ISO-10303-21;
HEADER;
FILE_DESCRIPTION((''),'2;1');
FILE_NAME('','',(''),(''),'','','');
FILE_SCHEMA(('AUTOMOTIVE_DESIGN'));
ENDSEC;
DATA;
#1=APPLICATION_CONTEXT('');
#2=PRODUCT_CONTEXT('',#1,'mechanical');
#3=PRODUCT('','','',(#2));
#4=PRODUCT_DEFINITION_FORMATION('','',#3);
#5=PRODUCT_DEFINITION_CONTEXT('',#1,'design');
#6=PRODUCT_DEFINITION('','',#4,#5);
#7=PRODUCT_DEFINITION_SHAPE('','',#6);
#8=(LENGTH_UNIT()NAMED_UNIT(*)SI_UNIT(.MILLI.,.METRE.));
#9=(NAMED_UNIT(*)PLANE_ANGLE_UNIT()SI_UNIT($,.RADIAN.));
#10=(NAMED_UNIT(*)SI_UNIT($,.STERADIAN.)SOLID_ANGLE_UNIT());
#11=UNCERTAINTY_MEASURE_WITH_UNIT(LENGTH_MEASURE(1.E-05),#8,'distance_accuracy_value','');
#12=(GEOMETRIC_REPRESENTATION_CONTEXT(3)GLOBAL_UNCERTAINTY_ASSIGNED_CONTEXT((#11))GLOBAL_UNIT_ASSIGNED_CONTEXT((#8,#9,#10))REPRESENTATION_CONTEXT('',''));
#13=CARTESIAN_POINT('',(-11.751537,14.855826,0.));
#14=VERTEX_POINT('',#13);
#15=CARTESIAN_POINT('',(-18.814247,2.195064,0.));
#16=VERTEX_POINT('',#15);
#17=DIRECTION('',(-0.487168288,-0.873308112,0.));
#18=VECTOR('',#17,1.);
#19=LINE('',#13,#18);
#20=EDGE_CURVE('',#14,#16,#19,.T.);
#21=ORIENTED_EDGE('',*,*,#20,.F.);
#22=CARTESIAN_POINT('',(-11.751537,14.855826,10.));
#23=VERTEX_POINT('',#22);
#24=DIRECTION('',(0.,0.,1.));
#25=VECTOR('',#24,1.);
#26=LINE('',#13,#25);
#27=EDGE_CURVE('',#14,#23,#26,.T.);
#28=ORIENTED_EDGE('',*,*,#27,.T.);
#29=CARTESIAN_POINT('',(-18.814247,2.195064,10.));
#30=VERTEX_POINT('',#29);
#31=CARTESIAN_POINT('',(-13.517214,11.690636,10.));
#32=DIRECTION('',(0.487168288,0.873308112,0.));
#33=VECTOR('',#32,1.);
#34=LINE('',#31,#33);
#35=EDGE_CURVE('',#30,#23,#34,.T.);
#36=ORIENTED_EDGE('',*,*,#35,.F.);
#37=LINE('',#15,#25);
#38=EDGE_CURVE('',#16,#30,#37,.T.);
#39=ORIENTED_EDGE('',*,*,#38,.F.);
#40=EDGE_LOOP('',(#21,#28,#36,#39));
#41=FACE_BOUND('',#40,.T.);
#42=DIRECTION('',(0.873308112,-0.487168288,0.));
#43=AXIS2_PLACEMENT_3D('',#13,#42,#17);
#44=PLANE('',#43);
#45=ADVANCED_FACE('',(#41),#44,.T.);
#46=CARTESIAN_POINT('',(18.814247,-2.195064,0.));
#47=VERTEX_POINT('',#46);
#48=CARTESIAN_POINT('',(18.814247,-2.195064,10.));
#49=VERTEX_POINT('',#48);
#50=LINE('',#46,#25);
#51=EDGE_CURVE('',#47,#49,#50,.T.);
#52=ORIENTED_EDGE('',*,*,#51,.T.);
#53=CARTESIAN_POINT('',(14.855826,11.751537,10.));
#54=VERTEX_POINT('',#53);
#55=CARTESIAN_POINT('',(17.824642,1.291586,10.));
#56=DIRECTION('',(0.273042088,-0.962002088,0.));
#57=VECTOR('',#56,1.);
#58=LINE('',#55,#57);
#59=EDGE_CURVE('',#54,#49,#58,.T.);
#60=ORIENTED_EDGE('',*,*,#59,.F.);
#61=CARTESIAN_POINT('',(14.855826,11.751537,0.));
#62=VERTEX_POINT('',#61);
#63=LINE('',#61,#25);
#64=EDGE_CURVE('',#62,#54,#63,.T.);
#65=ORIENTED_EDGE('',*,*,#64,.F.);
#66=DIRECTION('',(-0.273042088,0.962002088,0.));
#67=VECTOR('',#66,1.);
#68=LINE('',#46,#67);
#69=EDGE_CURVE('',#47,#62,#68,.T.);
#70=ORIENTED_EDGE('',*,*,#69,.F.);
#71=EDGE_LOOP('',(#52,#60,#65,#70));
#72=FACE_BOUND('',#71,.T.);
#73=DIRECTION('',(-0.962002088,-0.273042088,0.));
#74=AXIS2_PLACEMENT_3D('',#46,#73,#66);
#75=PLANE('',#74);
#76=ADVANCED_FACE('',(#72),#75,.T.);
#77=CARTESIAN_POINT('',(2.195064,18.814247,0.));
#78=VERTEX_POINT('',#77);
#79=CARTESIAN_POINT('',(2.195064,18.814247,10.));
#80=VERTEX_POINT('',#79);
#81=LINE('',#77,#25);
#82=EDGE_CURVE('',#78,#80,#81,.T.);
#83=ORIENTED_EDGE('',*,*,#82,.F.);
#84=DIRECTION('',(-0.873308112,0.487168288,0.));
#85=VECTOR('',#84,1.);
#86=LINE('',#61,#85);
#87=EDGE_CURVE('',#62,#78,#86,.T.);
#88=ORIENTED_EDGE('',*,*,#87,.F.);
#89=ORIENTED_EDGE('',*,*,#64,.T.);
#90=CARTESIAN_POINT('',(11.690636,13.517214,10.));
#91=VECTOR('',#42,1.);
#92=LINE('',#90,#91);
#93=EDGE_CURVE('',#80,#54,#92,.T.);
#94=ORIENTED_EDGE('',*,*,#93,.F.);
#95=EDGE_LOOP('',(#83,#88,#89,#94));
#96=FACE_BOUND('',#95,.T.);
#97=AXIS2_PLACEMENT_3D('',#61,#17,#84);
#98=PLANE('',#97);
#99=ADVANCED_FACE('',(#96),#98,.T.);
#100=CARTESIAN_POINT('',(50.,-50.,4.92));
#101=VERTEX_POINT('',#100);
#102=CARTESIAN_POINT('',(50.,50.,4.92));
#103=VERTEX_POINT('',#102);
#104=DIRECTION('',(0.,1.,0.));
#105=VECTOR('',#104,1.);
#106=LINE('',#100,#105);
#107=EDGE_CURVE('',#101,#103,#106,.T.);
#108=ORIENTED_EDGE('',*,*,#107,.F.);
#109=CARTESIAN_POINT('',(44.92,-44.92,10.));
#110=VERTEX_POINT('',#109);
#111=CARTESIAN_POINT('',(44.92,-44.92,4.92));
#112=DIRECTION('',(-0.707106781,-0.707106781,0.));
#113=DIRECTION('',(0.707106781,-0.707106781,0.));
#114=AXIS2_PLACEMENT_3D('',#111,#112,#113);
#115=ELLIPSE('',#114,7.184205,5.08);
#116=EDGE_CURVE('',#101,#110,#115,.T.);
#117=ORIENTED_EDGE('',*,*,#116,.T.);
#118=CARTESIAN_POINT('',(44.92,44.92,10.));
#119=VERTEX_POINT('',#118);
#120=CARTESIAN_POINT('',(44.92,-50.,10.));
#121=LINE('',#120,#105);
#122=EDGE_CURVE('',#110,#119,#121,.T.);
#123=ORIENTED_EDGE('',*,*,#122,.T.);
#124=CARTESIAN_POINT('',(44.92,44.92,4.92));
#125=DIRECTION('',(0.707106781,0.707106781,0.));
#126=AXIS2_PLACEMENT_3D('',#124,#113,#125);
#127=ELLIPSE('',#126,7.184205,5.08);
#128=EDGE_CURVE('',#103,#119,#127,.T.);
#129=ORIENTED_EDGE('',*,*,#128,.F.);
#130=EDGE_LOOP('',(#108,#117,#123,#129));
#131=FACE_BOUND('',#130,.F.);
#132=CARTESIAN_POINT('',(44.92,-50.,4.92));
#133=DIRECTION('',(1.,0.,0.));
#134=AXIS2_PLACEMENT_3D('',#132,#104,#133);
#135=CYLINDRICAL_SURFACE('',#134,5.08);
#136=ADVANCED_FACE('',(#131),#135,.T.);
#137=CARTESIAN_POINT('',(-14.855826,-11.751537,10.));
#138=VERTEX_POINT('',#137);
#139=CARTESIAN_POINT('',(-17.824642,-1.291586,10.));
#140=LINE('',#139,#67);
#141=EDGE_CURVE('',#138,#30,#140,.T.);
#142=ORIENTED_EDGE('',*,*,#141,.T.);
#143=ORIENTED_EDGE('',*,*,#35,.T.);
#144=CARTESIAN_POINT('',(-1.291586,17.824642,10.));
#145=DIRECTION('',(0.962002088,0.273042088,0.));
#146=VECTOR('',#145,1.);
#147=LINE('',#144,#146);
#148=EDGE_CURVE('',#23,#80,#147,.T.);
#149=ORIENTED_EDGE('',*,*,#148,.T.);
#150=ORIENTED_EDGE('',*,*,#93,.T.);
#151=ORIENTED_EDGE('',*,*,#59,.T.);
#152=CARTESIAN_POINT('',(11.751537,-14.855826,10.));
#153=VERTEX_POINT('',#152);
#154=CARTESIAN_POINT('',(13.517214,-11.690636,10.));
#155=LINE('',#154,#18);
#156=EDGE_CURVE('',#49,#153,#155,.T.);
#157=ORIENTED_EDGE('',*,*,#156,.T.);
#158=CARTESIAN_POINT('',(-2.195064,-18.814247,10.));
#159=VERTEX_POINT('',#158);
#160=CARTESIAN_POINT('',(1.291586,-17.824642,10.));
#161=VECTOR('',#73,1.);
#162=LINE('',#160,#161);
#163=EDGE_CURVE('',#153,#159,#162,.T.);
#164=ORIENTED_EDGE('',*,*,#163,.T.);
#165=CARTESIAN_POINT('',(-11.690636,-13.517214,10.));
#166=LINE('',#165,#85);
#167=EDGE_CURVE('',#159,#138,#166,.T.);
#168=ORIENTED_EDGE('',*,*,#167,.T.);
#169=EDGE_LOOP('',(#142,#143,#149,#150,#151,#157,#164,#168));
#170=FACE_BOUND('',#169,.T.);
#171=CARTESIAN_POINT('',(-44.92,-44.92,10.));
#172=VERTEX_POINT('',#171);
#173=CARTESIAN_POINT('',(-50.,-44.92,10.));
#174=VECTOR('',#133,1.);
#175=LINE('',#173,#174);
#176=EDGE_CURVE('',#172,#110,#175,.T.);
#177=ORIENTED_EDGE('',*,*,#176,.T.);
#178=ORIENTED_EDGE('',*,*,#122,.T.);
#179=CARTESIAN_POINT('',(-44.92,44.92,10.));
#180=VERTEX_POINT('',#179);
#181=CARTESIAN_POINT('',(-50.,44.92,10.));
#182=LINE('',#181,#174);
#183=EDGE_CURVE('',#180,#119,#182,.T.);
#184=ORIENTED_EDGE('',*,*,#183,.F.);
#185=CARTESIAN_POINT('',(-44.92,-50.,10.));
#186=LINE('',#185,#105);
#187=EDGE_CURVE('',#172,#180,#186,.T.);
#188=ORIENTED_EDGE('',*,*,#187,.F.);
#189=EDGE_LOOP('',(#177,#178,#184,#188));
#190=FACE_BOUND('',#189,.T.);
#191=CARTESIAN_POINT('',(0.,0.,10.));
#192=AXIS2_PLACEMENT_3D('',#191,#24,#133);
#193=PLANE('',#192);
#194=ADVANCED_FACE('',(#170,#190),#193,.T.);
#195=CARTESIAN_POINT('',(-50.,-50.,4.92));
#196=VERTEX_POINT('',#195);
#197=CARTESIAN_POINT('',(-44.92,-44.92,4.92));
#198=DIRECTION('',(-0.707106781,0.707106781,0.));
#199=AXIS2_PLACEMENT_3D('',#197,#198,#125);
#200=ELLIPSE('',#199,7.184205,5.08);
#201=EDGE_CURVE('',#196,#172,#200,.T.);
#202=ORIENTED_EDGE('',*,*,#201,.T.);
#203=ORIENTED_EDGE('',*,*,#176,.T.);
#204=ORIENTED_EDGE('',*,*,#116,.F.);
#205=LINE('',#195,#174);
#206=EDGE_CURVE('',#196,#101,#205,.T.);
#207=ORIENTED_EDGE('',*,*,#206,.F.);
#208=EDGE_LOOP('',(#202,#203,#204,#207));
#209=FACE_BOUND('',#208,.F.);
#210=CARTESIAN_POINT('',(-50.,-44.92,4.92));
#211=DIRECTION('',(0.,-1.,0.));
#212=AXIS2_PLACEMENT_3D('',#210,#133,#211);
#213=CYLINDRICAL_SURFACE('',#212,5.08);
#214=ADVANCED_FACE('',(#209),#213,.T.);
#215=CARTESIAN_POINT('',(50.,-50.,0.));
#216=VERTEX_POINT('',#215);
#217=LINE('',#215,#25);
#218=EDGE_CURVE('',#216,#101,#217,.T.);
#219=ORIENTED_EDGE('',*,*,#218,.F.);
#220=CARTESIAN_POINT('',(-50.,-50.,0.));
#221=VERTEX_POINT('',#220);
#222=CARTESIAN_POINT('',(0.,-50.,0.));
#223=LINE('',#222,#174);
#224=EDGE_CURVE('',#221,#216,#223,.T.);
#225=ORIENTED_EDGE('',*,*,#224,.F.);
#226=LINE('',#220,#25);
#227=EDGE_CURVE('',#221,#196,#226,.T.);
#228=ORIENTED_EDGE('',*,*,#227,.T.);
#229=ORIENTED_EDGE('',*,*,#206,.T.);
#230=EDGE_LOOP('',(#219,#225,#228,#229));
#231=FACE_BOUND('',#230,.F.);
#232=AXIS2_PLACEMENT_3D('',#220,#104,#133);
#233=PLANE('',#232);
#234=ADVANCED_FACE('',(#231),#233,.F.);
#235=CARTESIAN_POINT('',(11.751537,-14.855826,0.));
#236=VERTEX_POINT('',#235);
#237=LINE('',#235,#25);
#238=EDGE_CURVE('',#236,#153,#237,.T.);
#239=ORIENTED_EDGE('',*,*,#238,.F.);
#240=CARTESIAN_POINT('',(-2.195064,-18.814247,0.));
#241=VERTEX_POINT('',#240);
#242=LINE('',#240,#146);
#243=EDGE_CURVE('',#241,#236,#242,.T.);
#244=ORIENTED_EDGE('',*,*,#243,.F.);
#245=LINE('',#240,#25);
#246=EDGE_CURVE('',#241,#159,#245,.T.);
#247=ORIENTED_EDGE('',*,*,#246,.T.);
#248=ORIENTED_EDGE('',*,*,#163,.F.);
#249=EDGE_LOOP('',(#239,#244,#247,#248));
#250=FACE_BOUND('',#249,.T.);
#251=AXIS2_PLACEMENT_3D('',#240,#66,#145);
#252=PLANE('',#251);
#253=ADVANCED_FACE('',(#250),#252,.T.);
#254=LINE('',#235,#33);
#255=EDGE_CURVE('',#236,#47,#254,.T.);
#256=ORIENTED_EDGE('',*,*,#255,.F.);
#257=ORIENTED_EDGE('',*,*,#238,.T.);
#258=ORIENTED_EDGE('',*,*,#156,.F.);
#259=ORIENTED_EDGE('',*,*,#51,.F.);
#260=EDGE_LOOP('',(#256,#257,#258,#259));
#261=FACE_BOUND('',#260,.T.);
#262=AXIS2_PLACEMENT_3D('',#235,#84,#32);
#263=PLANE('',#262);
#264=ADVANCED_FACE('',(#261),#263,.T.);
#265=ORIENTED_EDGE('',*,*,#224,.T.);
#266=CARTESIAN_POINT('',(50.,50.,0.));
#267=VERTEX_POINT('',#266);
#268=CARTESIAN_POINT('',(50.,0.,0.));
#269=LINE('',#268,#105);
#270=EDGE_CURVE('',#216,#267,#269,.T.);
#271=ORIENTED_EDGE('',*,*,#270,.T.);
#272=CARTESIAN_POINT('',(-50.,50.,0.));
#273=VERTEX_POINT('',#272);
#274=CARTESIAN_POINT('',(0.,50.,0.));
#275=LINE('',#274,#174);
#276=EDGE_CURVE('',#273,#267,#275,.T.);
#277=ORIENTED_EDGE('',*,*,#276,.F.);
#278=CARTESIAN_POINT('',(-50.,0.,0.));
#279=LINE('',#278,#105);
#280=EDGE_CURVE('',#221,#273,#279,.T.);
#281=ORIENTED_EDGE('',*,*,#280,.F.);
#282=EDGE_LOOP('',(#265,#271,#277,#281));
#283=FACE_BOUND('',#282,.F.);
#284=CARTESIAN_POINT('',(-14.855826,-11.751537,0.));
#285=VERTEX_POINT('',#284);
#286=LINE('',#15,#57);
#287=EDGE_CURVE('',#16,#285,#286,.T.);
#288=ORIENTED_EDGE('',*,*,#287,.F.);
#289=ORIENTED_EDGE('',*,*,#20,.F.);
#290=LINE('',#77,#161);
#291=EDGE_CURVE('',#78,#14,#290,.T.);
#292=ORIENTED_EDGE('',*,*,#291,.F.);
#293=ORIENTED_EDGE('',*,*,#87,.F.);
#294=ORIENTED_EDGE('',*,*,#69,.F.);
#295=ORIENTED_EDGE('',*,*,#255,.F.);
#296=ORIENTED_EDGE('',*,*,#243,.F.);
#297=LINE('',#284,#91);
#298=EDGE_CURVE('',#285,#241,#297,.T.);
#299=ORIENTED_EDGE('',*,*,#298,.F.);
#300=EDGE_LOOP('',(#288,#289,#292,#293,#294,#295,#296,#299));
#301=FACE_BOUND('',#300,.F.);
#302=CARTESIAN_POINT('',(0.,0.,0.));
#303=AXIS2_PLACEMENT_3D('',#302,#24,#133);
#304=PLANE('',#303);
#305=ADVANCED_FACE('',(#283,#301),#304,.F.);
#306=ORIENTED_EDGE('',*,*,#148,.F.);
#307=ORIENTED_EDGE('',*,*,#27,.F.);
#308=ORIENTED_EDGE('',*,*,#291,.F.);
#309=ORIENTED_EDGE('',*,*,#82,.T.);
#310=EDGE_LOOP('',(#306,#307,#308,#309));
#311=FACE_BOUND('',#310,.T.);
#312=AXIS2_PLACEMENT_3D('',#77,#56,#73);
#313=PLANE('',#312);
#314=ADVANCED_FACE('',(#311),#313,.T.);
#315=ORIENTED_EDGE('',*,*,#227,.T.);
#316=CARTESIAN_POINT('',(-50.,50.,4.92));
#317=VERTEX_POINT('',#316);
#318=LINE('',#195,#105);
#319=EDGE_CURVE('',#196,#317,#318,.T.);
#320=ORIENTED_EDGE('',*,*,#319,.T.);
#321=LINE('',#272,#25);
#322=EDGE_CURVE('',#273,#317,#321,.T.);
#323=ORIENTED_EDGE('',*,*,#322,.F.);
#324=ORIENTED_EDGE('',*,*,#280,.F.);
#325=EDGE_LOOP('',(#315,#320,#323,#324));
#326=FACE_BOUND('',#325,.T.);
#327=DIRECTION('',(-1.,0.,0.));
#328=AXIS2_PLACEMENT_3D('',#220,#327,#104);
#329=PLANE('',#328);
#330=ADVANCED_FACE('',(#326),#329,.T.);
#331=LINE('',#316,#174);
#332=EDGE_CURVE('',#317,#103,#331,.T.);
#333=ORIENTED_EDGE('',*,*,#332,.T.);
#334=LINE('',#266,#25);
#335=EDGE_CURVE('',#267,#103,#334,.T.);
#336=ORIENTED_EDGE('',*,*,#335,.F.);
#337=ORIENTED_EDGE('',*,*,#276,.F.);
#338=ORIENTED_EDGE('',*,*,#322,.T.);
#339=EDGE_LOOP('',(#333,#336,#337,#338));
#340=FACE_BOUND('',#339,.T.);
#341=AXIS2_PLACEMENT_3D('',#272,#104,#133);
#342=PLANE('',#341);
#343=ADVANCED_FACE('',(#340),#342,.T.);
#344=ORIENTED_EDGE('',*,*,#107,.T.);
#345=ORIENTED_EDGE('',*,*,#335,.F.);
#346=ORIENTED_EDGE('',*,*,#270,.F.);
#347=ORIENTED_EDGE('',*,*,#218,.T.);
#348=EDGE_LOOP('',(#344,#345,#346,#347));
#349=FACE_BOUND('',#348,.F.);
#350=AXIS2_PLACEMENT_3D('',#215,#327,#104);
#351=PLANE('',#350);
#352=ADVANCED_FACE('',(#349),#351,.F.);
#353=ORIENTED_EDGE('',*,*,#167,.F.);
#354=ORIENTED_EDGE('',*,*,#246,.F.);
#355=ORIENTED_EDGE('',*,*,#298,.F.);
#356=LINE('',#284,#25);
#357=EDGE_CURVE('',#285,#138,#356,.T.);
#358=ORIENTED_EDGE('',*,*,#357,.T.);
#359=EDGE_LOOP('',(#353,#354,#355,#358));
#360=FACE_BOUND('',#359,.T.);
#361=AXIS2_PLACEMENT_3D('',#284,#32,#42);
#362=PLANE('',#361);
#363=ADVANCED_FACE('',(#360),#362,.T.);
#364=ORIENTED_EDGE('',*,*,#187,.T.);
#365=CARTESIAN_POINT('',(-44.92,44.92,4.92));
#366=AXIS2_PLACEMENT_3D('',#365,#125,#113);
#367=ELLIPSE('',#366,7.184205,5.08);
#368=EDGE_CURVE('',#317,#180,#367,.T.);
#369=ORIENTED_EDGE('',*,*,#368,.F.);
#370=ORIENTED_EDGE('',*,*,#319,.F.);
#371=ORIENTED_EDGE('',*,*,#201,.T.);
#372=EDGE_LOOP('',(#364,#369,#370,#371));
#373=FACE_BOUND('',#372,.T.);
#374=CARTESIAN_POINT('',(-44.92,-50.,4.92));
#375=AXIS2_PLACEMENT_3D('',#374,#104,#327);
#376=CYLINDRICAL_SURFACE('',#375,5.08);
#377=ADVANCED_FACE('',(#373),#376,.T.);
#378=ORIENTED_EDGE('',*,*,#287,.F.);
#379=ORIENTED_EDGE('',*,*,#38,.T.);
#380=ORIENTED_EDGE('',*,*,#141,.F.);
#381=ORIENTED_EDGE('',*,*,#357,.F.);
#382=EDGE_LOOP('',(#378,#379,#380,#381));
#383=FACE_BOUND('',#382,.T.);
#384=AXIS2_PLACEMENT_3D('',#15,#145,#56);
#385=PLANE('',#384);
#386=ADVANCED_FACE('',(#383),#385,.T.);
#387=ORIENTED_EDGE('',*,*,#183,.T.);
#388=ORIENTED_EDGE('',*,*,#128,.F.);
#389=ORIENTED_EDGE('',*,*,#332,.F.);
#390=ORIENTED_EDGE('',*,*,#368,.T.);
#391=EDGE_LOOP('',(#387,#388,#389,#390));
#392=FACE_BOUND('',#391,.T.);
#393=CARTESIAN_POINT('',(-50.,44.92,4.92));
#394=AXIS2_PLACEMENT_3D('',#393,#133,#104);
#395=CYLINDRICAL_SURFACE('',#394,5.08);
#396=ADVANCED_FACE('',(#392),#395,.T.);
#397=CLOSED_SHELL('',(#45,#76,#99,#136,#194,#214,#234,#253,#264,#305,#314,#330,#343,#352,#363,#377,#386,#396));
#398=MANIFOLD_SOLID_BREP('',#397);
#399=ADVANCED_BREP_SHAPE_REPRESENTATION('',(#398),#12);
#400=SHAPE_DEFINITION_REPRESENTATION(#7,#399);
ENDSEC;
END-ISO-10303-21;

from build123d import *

# Parameters (mm, degrees)
F0_W     = 100
F0_H     = 100
F2_DEPTH = 10
F3_R     = 5.08
F4_DEPTH = 61.976


# Not quite as in the source:
# - a feature of the source that left no trace in its solid (it failed there, or was rolled back) is left out


with BuildPart() as f2:
    # F0 (on Top) → F2 (new body)
    with BuildSketch(Plane.XY):
        Rectangle(F0_W, F0_H)
    extrude(amount=F2_DEPTH)

    # F3
    f3_edges = [f2.edges().sort_by_distance(p)[0] for p in [
        (0, 50, 10),
        (-50, 0, 10),
        (0, -50, 10),
        (50, 0, 10),
    ]]
    fillet(f3_edges, radius=F3_R)

    # F1 (on face) → F4 (cut)
    with BuildSketch(Plane.XY):
        Polygon((-11.7515370065, 14.8558261646), (-18.8142469277, 2.1950639145), (-14.8558261646, -11.7515370065), (-2.1950639145, -18.8142469277), (11.7515370065, -14.8558261646), (18.8142469277, -2.1950639145), (14.8558261646, 11.7515370065), (2.1950639145, 18.8142469277), align=None)
    extrude(amount=F4_DEPTH, mode=Mode.SUBTRACT)


solid = f2.part
